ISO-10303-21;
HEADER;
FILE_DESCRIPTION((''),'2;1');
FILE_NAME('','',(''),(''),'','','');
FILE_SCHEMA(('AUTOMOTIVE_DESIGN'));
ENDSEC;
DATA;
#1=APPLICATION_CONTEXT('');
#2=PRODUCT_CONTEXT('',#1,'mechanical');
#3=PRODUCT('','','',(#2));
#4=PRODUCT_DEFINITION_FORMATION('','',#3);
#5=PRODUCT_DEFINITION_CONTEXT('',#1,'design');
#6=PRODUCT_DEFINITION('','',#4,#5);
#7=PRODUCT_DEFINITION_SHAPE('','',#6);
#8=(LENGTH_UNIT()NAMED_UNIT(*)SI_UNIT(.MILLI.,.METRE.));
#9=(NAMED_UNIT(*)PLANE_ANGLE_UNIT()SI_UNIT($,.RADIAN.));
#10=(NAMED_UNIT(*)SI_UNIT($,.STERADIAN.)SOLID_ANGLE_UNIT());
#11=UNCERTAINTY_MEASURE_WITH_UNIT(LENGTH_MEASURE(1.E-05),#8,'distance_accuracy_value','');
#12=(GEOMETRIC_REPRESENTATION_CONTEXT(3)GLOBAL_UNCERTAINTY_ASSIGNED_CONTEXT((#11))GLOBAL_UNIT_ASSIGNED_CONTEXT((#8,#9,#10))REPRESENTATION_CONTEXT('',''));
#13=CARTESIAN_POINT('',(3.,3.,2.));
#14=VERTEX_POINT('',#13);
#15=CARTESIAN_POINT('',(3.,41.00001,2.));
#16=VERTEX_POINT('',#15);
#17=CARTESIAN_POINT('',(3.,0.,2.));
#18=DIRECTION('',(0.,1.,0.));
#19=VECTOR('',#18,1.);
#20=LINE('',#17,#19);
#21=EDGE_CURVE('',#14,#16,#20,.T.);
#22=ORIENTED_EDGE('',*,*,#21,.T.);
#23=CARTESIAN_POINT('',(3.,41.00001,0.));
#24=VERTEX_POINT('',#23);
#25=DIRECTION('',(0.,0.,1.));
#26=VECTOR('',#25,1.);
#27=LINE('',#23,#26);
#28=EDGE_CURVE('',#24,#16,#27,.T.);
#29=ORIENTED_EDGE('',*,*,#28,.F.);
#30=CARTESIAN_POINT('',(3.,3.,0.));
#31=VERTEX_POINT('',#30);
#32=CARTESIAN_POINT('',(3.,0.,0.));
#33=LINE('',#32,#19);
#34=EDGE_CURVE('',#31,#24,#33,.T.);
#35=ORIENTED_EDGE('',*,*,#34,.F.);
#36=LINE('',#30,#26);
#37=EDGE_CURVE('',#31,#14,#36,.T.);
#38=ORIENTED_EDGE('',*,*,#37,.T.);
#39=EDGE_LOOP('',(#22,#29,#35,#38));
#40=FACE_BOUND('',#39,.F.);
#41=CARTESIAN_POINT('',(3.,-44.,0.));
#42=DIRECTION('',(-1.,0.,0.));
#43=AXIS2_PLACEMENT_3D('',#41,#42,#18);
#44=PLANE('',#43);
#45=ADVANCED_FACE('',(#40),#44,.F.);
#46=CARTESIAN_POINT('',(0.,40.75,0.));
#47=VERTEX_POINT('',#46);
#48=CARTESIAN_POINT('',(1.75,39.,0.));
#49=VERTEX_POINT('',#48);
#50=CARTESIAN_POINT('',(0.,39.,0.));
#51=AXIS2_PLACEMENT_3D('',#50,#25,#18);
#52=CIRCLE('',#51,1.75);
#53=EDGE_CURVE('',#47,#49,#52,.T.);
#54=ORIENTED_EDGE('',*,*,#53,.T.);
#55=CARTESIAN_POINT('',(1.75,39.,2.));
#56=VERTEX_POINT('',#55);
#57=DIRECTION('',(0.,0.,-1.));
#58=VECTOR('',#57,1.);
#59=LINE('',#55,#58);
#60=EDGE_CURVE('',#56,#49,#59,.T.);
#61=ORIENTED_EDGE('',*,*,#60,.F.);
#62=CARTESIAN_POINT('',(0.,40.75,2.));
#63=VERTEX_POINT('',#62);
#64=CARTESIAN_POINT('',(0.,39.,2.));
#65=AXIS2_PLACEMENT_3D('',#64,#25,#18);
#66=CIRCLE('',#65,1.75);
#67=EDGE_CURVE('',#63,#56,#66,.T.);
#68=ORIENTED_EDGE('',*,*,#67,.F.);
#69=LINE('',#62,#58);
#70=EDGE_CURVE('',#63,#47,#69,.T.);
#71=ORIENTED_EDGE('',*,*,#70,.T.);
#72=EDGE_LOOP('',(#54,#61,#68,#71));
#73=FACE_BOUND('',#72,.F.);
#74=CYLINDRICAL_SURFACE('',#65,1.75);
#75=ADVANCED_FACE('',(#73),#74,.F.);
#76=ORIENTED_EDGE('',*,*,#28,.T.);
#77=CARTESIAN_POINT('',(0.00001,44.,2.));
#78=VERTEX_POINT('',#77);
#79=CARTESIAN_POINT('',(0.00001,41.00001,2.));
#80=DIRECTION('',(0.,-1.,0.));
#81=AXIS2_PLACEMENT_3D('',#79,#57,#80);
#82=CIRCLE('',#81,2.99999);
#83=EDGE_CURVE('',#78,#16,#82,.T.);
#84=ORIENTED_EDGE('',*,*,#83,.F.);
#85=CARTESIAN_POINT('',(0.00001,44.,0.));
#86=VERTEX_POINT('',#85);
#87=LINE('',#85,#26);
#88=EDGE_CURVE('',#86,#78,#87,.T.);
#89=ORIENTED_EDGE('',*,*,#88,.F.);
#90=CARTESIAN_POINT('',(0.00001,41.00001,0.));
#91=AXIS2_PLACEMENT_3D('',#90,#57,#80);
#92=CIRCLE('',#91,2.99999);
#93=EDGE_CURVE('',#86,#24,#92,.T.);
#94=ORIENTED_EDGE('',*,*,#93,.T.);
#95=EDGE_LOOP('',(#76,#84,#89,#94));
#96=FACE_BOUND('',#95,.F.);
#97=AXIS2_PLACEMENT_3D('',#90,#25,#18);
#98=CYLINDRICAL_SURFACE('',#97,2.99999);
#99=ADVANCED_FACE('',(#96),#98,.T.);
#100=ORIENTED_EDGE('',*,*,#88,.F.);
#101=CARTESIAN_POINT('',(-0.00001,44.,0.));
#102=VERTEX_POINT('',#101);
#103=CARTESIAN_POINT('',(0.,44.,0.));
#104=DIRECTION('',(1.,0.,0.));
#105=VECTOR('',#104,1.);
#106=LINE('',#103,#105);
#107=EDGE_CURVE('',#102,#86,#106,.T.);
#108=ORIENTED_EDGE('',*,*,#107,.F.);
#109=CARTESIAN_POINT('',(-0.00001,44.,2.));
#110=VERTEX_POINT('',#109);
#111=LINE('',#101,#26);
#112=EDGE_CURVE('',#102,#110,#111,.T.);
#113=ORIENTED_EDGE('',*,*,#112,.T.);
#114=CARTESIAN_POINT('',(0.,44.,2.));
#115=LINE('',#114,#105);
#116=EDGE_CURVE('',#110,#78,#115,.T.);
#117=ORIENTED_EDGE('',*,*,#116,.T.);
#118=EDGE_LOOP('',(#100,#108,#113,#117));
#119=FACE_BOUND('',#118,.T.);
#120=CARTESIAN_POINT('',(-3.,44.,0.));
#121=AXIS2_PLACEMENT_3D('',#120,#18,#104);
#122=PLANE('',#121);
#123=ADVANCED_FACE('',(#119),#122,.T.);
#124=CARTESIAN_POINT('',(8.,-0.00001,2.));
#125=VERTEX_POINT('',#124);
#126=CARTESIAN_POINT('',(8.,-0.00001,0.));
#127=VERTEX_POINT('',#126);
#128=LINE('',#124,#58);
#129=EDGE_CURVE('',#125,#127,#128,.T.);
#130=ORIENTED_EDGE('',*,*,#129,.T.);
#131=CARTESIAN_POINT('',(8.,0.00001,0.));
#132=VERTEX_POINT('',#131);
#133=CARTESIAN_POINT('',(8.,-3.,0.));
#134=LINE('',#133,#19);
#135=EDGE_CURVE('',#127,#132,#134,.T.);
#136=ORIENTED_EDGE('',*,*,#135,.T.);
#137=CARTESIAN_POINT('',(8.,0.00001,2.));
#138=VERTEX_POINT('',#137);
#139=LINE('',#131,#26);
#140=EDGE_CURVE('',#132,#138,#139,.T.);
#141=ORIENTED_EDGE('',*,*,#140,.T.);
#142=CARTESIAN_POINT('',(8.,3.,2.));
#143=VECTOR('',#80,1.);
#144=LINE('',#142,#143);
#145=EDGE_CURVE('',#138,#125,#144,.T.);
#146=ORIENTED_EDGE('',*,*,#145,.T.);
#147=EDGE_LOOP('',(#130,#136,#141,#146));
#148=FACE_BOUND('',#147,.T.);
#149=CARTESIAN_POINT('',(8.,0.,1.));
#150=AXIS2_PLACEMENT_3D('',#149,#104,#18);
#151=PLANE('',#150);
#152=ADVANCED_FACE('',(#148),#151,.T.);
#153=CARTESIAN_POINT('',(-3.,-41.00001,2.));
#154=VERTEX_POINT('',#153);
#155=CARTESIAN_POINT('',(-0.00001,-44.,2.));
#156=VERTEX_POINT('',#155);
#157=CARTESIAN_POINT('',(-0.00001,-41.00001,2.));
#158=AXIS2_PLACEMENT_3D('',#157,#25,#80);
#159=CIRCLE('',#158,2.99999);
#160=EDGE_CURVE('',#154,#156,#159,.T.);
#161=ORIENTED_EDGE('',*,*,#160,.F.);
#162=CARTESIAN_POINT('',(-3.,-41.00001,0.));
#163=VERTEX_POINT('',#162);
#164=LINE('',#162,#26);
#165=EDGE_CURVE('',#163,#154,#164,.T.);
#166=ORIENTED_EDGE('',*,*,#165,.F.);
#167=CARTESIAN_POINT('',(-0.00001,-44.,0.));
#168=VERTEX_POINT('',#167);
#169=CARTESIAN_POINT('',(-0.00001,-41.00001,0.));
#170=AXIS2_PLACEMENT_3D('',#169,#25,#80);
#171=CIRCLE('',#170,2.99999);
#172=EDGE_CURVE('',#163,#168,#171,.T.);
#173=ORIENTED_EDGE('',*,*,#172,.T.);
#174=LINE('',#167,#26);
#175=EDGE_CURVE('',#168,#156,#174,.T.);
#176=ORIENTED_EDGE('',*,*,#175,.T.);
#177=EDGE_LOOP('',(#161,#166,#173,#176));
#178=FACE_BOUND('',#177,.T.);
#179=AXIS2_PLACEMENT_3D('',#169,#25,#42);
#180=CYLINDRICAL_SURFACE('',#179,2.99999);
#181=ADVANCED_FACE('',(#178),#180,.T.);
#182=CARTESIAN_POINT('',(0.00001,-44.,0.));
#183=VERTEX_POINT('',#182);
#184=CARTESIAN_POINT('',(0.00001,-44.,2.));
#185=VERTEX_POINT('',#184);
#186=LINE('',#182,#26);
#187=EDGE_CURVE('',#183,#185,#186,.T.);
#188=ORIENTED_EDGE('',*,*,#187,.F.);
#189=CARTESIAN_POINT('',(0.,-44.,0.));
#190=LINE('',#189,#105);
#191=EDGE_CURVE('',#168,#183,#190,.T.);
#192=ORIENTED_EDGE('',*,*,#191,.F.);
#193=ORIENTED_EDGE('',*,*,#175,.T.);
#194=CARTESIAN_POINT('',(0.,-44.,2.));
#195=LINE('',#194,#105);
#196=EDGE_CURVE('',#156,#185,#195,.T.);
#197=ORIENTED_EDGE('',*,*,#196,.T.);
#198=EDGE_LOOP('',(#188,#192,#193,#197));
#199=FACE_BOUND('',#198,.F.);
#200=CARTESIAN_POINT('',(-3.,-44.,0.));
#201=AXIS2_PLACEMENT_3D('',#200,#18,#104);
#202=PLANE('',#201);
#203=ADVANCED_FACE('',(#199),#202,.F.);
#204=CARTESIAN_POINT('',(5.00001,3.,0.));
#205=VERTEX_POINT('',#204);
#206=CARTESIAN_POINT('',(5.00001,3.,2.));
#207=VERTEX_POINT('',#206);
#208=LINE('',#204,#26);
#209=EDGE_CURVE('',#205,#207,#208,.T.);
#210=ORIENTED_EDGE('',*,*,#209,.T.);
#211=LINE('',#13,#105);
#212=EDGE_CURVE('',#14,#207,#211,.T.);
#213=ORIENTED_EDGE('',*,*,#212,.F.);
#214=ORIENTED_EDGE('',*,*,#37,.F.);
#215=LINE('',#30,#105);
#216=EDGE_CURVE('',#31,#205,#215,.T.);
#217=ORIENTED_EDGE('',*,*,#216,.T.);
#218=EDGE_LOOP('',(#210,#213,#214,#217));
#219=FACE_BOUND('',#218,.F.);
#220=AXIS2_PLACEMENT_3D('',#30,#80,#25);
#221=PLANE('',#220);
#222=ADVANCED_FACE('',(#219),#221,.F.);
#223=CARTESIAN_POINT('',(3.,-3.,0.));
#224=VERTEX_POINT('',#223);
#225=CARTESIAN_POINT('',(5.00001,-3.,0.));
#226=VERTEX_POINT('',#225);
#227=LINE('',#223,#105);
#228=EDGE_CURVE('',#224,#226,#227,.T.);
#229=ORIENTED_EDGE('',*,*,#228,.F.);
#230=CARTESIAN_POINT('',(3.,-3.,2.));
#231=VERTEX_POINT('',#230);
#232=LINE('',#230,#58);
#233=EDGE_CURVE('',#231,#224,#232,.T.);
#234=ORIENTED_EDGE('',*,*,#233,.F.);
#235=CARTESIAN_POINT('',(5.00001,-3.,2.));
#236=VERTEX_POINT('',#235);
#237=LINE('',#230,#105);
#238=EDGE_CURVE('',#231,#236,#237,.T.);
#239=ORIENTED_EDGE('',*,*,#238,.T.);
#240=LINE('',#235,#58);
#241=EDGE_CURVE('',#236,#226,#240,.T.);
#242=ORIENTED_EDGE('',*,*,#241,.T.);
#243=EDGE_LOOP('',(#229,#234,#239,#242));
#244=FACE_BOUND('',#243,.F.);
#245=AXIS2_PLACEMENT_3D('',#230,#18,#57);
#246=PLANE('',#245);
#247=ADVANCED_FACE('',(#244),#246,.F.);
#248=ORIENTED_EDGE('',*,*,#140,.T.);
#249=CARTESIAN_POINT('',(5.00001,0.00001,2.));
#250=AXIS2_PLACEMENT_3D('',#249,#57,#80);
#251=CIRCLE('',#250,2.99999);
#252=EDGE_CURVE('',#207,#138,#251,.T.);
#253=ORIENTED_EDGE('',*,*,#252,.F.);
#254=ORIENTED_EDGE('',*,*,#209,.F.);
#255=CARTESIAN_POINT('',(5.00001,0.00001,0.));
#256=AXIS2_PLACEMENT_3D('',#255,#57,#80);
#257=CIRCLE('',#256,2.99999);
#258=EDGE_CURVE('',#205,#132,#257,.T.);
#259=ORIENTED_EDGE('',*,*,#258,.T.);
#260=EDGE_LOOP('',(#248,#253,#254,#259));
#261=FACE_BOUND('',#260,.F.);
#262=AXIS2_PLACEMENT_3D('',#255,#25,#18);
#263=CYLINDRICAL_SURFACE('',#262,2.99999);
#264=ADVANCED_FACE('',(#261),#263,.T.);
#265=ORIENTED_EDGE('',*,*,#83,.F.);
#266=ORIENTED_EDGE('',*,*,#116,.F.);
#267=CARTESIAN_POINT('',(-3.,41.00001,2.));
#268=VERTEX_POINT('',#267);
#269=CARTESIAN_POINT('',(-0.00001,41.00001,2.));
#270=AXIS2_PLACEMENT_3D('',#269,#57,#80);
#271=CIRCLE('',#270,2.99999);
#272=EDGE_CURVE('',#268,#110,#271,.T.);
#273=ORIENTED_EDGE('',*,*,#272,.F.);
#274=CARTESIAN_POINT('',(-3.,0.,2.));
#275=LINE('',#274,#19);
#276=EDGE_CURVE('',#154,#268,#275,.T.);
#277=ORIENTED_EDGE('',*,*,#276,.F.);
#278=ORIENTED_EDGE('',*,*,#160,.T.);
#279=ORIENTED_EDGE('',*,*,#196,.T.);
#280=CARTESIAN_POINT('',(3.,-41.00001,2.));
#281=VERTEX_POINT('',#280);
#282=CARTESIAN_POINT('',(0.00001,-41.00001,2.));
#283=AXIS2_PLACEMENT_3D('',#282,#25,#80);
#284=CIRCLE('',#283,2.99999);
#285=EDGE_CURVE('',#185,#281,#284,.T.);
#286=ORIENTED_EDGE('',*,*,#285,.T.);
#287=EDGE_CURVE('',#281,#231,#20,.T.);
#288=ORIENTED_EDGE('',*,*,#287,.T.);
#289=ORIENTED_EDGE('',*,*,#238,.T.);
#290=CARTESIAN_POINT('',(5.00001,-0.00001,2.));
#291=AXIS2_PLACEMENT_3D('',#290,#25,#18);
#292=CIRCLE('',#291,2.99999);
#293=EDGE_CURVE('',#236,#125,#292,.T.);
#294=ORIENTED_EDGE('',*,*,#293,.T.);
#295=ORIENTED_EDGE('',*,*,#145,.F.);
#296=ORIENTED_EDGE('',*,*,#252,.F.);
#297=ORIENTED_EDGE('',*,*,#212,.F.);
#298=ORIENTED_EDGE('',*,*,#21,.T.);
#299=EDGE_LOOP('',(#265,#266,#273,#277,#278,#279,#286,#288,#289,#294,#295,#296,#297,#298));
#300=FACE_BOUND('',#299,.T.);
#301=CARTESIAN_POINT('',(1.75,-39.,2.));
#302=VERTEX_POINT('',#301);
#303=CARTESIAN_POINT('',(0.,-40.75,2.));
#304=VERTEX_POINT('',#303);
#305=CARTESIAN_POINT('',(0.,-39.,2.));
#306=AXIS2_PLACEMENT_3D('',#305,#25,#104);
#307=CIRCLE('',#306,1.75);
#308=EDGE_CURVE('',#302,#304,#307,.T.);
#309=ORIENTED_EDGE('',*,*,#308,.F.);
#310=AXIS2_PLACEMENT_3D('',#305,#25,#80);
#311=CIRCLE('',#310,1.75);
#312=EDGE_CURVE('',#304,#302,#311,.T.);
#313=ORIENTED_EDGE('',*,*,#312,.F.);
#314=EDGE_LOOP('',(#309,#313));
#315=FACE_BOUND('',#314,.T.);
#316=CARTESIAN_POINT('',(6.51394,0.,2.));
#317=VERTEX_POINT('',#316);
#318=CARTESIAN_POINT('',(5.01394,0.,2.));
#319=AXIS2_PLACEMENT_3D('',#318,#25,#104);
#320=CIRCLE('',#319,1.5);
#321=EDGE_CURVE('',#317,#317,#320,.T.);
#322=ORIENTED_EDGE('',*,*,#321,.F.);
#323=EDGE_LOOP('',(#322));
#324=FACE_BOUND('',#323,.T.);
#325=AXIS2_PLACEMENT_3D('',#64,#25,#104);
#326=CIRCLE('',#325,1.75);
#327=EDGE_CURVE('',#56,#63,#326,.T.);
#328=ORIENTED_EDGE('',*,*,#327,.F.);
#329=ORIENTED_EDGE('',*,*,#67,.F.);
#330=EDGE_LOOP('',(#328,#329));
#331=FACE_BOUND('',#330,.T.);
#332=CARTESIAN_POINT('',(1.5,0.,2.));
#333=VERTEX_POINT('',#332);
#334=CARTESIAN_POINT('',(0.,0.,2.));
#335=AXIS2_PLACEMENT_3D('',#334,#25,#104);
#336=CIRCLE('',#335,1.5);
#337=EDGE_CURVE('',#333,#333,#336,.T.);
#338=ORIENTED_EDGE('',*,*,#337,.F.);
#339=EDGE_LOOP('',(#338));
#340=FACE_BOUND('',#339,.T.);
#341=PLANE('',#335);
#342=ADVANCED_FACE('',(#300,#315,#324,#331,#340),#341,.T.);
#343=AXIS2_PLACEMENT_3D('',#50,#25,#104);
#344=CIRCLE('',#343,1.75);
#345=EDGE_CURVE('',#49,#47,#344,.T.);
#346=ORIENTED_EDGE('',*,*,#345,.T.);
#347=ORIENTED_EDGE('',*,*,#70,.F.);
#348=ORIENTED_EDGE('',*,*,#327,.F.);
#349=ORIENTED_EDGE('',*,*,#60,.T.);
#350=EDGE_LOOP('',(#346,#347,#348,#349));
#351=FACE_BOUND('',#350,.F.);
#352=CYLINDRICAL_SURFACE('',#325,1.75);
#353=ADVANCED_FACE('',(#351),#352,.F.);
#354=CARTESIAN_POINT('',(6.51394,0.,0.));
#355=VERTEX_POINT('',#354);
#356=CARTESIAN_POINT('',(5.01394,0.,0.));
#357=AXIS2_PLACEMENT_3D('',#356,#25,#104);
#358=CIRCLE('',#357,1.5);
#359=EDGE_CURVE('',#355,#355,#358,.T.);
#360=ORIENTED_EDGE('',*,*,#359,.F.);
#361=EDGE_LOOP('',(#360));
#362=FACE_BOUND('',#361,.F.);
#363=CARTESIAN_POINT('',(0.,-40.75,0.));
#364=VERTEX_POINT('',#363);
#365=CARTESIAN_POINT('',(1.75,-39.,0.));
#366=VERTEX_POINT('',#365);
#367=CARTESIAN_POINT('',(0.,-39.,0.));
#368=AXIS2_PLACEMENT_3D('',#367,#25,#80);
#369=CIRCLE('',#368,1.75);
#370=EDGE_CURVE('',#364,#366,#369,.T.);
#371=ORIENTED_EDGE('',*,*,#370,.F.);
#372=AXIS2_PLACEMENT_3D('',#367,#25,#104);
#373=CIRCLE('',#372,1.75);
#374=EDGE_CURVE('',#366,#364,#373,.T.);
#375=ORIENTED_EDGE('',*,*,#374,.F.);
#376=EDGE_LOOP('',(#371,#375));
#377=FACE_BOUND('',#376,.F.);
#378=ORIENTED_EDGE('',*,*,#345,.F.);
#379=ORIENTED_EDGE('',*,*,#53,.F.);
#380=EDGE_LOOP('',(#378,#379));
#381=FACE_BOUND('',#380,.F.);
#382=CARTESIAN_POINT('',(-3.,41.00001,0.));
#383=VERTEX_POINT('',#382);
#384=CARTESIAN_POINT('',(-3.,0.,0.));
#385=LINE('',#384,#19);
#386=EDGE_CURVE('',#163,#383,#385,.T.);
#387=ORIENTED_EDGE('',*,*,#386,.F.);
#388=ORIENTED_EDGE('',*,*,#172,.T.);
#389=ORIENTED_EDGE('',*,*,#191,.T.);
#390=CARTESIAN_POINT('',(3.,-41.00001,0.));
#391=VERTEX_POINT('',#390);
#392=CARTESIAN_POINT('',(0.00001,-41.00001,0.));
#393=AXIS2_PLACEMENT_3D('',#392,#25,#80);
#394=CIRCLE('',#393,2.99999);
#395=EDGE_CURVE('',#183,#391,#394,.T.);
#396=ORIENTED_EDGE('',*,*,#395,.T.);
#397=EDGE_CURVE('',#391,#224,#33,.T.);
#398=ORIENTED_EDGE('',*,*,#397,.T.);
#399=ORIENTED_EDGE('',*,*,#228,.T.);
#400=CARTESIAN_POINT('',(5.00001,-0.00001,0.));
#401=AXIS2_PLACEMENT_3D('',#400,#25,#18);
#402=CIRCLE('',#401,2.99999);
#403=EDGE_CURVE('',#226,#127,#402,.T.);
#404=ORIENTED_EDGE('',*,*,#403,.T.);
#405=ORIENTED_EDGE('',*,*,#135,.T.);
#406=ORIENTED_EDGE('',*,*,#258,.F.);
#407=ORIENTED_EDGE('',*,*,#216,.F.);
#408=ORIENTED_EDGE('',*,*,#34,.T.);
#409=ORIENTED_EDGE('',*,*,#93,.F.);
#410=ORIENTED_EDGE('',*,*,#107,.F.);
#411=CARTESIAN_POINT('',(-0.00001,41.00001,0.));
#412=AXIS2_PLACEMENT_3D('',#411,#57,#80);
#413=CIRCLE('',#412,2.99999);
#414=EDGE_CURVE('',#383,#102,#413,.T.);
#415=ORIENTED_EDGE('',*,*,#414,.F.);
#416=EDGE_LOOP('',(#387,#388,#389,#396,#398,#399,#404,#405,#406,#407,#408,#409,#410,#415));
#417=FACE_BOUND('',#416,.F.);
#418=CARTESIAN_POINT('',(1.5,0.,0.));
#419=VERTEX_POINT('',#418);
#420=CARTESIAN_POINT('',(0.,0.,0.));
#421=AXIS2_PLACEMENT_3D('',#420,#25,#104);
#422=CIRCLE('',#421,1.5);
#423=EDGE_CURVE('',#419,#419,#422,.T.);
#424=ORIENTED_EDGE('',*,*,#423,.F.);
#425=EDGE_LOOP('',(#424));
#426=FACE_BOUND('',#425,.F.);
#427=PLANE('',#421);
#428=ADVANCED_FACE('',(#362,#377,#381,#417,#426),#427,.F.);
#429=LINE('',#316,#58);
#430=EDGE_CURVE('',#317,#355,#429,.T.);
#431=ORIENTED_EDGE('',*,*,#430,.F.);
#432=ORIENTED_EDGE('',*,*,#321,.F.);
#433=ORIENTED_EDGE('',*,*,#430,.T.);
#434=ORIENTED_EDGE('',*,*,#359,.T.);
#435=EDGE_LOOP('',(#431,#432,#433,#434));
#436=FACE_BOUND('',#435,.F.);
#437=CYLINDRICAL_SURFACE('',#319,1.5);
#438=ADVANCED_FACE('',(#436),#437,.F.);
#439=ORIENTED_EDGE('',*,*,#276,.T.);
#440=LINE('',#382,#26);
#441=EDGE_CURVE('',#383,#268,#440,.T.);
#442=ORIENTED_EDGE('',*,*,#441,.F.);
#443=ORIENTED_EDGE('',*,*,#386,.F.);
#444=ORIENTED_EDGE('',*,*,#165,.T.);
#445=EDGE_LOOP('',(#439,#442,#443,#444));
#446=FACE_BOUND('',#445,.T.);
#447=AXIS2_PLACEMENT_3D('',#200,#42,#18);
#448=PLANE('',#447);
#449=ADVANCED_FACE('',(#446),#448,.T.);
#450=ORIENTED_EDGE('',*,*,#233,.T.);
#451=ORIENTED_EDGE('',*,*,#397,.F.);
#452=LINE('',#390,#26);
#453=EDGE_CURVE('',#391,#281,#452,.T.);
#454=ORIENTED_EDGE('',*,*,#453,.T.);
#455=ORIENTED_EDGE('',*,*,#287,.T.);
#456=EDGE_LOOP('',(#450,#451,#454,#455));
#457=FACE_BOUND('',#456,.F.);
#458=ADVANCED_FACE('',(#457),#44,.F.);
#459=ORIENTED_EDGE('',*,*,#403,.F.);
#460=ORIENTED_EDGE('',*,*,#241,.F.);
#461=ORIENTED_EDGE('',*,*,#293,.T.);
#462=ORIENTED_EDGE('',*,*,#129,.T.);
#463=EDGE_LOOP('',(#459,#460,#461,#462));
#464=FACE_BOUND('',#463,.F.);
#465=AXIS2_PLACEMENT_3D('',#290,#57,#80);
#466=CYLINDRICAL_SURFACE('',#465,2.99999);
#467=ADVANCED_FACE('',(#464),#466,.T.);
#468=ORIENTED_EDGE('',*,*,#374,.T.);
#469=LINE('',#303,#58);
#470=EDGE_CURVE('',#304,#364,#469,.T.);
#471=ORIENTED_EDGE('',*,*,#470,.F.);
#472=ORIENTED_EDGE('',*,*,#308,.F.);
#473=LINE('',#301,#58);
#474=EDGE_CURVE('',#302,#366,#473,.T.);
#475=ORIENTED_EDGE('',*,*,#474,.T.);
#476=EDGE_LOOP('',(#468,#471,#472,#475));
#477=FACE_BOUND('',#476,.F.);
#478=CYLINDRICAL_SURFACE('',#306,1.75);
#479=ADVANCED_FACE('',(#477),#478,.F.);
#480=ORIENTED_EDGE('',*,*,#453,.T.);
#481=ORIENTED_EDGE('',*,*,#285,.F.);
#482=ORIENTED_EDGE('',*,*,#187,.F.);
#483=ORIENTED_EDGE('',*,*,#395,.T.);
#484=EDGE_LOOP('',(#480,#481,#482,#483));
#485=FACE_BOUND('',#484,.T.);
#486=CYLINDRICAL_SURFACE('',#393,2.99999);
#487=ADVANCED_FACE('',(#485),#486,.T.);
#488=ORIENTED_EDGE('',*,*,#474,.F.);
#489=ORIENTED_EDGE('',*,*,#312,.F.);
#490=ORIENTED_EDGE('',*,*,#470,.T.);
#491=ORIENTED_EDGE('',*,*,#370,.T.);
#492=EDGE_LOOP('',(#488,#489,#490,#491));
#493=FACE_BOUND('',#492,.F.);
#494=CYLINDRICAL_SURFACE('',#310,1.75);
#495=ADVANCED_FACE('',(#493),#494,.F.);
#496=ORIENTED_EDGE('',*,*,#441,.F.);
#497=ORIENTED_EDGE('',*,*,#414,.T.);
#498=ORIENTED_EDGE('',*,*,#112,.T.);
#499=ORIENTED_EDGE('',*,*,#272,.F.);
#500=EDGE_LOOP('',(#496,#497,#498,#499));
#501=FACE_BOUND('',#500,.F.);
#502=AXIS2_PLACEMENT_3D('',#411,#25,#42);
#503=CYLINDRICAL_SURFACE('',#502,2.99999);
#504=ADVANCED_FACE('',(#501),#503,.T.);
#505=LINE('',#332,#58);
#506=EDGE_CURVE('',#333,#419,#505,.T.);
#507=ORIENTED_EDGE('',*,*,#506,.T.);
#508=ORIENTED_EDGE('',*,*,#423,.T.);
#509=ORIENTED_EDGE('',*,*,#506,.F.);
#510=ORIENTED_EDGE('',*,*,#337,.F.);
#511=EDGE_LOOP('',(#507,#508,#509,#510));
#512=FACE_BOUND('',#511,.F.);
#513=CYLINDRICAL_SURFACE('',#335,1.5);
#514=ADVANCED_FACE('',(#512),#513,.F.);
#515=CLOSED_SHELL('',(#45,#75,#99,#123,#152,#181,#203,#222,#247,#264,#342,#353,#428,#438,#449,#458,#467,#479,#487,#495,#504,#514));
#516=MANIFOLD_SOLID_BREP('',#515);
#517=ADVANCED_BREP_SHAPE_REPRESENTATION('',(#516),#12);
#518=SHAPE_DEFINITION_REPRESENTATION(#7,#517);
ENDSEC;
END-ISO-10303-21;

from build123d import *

# Parameters (mm, degrees)
F0_W     = 6
F0_H     = 88
F1_DEPTH = 2
F2_R     = 1.5
F3_DEPTH = 2
F5_DEPTH = 5
F6_R     = 1.5
F7_DEPTH = 2
F8_R     = 2.99999


# Not quite as in the source:
# - a fillet or chamfer is up to 0.001 mm smaller than in the source, because OpenCascade refuses the exact size


with BuildPart() as f1:
    # F0 (on Top) → F1 (new body)
    with BuildSketch(Plane.XY):
        Rectangle(F0_W, F0_H)
    extrude(amount=F1_DEPTH)

    # F2 (on face) → F3 (cut, through all)
    with BuildSketch(Plane.XY.offset(2)):
        Circle(F2_R)
        with BuildLine():
            ThreePointArc((0, 40.75), (-1.2374368671, 37.7625631329), (1.75, 39))
            ThreePointArc((1.75, 39), (1.2374368671, 40.2374368671), (0, 40.75))
        make_face()
        with BuildLine():
            ThreePointArc((0, -40.75), (1.2374368671, -40.2374368671), (1.75, -39))
            ThreePointArc((1.75, -39), (-1.2374368671, -37.7625631329), (0, -40.75))
        make_face()
    extrude(amount=-F3_DEPTH, mode=Mode.SUBTRACT)

    # F4 (on face) → F5 (join)
    with BuildSketch(Plane.YZ.offset(3)):
        Polygon((3, 2), (0, 2), (-3, 2), (-3, 0), (0, 0), (3, 0), align=None)
    extrude(amount=F5_DEPTH)

    # F6 (on face) → F7 (cut, through all)
    with BuildSketch(Plane.XY.offset(2)):
        with Locations((5.0139404441, 0)):
            Circle(F6_R)
    extrude(amount=-F7_DEPTH, mode=Mode.SUBTRACT)

    # F8 (radius 3 in the source; OpenCascade refuses exactly that, so slightly less here)
    f8_edges = [f1.edges().sort_by_distance(p)[0] for p in [
        (-3, -44, 1),
        (3, -44, 1),
        (3, 44, 1),
        (-3, 44, 1),
        (8, -3, 1),
        (8, 3, 1),
    ]]
    fillet(f8_edges, radius=F8_R)


solid = f1.part
